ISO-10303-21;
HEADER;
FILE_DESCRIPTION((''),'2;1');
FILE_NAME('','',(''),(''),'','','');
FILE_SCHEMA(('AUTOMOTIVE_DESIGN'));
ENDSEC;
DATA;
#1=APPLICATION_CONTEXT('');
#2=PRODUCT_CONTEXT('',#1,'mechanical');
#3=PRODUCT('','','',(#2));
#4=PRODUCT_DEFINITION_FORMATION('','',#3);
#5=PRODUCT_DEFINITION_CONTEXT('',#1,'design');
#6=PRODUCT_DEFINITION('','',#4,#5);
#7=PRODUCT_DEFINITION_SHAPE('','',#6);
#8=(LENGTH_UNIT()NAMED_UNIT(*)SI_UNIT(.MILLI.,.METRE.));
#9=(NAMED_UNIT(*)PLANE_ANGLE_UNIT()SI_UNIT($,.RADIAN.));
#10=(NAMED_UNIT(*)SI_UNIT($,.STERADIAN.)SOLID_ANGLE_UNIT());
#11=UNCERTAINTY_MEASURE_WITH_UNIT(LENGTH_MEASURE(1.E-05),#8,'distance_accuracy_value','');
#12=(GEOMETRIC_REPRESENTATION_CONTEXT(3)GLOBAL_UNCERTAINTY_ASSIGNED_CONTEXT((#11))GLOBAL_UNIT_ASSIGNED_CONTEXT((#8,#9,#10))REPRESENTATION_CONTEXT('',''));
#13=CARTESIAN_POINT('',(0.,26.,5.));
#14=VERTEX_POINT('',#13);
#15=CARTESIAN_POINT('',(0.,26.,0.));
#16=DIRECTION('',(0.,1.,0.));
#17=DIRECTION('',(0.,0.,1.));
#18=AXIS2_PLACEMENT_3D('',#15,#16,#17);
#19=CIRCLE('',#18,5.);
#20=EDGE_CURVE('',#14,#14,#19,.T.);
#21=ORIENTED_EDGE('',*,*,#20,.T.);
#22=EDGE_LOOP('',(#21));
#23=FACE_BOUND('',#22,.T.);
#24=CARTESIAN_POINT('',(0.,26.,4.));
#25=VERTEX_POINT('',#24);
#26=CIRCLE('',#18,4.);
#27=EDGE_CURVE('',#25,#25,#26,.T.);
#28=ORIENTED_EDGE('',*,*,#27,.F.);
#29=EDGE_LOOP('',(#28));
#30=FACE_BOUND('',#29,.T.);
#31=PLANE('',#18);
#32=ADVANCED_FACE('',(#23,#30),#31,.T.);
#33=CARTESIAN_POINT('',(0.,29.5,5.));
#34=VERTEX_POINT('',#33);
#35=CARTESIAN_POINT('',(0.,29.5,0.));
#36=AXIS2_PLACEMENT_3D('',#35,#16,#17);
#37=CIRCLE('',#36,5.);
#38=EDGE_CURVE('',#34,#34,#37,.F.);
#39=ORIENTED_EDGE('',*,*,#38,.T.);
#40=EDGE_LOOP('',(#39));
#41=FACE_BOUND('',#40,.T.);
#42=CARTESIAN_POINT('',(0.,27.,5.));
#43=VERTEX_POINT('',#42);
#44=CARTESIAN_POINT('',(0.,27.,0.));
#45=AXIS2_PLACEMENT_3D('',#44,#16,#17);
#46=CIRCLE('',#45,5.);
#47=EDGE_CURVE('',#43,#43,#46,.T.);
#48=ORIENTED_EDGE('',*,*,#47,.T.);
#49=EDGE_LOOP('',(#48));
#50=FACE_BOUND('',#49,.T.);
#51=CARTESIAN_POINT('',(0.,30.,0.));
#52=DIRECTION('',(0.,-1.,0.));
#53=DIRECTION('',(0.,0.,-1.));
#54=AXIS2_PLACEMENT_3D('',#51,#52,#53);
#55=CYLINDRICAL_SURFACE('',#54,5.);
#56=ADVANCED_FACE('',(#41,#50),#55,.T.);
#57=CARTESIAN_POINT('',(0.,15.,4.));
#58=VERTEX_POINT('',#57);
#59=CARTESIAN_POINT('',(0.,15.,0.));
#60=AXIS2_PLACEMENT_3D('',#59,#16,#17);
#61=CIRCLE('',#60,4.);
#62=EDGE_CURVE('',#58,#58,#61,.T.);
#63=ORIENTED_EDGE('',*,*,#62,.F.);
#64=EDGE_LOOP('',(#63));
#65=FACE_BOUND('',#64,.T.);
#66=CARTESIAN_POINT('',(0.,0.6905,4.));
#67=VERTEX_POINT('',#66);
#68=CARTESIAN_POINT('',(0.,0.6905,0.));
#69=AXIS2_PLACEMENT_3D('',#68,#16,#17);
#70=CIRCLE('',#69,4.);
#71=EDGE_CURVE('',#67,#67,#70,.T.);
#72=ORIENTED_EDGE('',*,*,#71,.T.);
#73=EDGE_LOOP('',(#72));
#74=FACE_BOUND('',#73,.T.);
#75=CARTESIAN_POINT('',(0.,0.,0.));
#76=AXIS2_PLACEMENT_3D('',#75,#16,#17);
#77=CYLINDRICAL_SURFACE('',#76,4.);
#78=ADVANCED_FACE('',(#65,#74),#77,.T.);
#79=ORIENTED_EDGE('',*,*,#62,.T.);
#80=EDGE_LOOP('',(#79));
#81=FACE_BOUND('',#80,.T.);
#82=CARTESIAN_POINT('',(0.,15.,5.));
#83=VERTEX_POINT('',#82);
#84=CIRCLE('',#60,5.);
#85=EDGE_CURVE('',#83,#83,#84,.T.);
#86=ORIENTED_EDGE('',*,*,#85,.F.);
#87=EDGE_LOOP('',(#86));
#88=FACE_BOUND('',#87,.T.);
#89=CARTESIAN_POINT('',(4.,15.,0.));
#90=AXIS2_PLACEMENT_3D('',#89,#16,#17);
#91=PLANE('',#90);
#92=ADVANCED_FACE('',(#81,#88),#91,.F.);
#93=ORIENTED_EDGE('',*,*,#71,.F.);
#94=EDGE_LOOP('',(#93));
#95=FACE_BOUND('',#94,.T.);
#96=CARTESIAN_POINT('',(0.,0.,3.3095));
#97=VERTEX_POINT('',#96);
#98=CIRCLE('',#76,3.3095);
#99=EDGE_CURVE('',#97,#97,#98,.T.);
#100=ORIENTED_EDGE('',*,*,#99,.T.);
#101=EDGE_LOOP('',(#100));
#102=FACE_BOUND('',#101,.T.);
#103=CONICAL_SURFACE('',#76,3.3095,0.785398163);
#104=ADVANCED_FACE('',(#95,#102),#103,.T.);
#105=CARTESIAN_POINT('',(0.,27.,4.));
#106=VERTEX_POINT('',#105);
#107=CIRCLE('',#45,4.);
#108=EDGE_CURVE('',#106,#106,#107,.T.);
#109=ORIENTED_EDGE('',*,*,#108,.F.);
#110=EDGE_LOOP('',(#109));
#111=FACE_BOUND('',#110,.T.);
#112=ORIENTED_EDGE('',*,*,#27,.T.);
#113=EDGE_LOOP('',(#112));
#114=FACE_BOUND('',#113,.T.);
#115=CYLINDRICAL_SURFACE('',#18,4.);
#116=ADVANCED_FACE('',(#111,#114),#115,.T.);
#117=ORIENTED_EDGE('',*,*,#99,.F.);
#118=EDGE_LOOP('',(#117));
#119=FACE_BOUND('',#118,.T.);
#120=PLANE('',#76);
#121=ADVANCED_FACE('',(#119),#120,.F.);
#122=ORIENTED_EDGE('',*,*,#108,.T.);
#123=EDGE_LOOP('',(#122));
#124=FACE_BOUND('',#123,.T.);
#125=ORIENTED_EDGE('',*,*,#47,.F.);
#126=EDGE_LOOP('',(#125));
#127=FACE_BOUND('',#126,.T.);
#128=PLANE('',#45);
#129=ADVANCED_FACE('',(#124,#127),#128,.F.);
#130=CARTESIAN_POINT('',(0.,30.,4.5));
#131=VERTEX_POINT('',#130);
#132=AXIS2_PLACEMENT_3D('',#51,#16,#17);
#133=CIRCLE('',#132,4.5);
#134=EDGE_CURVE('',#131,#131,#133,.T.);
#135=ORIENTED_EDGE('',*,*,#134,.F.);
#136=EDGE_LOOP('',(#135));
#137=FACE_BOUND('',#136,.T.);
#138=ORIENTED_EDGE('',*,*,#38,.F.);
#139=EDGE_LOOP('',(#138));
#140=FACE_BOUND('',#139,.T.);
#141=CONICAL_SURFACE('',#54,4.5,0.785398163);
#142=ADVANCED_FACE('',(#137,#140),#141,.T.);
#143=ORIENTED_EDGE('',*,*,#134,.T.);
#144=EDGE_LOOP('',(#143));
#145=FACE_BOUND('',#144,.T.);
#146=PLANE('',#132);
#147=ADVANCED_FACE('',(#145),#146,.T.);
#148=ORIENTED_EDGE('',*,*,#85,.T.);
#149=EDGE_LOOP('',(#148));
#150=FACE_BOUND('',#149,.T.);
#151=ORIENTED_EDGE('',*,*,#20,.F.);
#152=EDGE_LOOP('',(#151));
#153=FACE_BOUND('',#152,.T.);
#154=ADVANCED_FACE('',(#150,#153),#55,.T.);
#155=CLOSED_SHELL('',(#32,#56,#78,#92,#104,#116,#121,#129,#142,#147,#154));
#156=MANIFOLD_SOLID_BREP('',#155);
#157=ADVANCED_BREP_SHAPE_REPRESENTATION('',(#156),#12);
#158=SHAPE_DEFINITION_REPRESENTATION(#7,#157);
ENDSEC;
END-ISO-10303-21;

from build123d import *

# Parameters (mm, degrees)
SKETCH1_R           = 5
BOSS_EXTRUDE1_DEPTH = 30
CHAMFER1_SIZE       = 0.5
CUT_EXTRUDE1_START  = -3
SKETCH2_R           = 6
SKETCH2_R_2         = 4
CUT_EXTRUDE1_DEPTH  = 1


# Read off the part's stored shape, not the designer's step: M8 Machine Threads Stud1
with BuildPart() as part:
    # Sketch1 → Boss-Extrude1 (new body)
    with BuildSketch(Plane(origin=(0, 0, 0), x_dir=(1, 0, 0), z_dir=(0, 1, 0))):
        with Locations(Location((0, 0, 0), (0, 0, 270))):
            Circle(SKETCH1_R)
    extrude(amount=BOSS_EXTRUDE1_DEPTH)

    # Chamfer1
    chamfer1_edges = [part.edges().sort_by_distance(p)[0] for p in [
        (0, 30, -5),
    ]]
    chamfer(chamfer1_edges, length=CHAMFER1_SIZE)

    # Sketch2 → Cut-Extrude1 (cut)
    with BuildSketch(Plane(origin=(0, 30, 0), x_dir=(1, 0, 0), z_dir=(0, 1, 0)).offset(CUT_EXTRUDE1_START)):
        Circle(SKETCH2_R)
        with Locations(Location((0, 0, 0), (0, 0, 270))):
            Circle(SKETCH2_R_2, mode=Mode.SUBTRACT)
    extrude(amount=-CUT_EXTRUDE1_DEPTH, mode=Mode.SUBTRACT)

    # M8 Machine Threads Stud1 outline → M8 Machine Threads Stud1 (revolve, cut)
    with BuildSketch(Plane.XY):
        Polygon((3.3095, 0), (5, 0), (5, 15), (4, 15), (4, 0.6905), align=None)
    revolve(axis=Axis((0, 0, 0), (0, 1, 0)), mode=Mode.SUBTRACT)


solid = part.part
